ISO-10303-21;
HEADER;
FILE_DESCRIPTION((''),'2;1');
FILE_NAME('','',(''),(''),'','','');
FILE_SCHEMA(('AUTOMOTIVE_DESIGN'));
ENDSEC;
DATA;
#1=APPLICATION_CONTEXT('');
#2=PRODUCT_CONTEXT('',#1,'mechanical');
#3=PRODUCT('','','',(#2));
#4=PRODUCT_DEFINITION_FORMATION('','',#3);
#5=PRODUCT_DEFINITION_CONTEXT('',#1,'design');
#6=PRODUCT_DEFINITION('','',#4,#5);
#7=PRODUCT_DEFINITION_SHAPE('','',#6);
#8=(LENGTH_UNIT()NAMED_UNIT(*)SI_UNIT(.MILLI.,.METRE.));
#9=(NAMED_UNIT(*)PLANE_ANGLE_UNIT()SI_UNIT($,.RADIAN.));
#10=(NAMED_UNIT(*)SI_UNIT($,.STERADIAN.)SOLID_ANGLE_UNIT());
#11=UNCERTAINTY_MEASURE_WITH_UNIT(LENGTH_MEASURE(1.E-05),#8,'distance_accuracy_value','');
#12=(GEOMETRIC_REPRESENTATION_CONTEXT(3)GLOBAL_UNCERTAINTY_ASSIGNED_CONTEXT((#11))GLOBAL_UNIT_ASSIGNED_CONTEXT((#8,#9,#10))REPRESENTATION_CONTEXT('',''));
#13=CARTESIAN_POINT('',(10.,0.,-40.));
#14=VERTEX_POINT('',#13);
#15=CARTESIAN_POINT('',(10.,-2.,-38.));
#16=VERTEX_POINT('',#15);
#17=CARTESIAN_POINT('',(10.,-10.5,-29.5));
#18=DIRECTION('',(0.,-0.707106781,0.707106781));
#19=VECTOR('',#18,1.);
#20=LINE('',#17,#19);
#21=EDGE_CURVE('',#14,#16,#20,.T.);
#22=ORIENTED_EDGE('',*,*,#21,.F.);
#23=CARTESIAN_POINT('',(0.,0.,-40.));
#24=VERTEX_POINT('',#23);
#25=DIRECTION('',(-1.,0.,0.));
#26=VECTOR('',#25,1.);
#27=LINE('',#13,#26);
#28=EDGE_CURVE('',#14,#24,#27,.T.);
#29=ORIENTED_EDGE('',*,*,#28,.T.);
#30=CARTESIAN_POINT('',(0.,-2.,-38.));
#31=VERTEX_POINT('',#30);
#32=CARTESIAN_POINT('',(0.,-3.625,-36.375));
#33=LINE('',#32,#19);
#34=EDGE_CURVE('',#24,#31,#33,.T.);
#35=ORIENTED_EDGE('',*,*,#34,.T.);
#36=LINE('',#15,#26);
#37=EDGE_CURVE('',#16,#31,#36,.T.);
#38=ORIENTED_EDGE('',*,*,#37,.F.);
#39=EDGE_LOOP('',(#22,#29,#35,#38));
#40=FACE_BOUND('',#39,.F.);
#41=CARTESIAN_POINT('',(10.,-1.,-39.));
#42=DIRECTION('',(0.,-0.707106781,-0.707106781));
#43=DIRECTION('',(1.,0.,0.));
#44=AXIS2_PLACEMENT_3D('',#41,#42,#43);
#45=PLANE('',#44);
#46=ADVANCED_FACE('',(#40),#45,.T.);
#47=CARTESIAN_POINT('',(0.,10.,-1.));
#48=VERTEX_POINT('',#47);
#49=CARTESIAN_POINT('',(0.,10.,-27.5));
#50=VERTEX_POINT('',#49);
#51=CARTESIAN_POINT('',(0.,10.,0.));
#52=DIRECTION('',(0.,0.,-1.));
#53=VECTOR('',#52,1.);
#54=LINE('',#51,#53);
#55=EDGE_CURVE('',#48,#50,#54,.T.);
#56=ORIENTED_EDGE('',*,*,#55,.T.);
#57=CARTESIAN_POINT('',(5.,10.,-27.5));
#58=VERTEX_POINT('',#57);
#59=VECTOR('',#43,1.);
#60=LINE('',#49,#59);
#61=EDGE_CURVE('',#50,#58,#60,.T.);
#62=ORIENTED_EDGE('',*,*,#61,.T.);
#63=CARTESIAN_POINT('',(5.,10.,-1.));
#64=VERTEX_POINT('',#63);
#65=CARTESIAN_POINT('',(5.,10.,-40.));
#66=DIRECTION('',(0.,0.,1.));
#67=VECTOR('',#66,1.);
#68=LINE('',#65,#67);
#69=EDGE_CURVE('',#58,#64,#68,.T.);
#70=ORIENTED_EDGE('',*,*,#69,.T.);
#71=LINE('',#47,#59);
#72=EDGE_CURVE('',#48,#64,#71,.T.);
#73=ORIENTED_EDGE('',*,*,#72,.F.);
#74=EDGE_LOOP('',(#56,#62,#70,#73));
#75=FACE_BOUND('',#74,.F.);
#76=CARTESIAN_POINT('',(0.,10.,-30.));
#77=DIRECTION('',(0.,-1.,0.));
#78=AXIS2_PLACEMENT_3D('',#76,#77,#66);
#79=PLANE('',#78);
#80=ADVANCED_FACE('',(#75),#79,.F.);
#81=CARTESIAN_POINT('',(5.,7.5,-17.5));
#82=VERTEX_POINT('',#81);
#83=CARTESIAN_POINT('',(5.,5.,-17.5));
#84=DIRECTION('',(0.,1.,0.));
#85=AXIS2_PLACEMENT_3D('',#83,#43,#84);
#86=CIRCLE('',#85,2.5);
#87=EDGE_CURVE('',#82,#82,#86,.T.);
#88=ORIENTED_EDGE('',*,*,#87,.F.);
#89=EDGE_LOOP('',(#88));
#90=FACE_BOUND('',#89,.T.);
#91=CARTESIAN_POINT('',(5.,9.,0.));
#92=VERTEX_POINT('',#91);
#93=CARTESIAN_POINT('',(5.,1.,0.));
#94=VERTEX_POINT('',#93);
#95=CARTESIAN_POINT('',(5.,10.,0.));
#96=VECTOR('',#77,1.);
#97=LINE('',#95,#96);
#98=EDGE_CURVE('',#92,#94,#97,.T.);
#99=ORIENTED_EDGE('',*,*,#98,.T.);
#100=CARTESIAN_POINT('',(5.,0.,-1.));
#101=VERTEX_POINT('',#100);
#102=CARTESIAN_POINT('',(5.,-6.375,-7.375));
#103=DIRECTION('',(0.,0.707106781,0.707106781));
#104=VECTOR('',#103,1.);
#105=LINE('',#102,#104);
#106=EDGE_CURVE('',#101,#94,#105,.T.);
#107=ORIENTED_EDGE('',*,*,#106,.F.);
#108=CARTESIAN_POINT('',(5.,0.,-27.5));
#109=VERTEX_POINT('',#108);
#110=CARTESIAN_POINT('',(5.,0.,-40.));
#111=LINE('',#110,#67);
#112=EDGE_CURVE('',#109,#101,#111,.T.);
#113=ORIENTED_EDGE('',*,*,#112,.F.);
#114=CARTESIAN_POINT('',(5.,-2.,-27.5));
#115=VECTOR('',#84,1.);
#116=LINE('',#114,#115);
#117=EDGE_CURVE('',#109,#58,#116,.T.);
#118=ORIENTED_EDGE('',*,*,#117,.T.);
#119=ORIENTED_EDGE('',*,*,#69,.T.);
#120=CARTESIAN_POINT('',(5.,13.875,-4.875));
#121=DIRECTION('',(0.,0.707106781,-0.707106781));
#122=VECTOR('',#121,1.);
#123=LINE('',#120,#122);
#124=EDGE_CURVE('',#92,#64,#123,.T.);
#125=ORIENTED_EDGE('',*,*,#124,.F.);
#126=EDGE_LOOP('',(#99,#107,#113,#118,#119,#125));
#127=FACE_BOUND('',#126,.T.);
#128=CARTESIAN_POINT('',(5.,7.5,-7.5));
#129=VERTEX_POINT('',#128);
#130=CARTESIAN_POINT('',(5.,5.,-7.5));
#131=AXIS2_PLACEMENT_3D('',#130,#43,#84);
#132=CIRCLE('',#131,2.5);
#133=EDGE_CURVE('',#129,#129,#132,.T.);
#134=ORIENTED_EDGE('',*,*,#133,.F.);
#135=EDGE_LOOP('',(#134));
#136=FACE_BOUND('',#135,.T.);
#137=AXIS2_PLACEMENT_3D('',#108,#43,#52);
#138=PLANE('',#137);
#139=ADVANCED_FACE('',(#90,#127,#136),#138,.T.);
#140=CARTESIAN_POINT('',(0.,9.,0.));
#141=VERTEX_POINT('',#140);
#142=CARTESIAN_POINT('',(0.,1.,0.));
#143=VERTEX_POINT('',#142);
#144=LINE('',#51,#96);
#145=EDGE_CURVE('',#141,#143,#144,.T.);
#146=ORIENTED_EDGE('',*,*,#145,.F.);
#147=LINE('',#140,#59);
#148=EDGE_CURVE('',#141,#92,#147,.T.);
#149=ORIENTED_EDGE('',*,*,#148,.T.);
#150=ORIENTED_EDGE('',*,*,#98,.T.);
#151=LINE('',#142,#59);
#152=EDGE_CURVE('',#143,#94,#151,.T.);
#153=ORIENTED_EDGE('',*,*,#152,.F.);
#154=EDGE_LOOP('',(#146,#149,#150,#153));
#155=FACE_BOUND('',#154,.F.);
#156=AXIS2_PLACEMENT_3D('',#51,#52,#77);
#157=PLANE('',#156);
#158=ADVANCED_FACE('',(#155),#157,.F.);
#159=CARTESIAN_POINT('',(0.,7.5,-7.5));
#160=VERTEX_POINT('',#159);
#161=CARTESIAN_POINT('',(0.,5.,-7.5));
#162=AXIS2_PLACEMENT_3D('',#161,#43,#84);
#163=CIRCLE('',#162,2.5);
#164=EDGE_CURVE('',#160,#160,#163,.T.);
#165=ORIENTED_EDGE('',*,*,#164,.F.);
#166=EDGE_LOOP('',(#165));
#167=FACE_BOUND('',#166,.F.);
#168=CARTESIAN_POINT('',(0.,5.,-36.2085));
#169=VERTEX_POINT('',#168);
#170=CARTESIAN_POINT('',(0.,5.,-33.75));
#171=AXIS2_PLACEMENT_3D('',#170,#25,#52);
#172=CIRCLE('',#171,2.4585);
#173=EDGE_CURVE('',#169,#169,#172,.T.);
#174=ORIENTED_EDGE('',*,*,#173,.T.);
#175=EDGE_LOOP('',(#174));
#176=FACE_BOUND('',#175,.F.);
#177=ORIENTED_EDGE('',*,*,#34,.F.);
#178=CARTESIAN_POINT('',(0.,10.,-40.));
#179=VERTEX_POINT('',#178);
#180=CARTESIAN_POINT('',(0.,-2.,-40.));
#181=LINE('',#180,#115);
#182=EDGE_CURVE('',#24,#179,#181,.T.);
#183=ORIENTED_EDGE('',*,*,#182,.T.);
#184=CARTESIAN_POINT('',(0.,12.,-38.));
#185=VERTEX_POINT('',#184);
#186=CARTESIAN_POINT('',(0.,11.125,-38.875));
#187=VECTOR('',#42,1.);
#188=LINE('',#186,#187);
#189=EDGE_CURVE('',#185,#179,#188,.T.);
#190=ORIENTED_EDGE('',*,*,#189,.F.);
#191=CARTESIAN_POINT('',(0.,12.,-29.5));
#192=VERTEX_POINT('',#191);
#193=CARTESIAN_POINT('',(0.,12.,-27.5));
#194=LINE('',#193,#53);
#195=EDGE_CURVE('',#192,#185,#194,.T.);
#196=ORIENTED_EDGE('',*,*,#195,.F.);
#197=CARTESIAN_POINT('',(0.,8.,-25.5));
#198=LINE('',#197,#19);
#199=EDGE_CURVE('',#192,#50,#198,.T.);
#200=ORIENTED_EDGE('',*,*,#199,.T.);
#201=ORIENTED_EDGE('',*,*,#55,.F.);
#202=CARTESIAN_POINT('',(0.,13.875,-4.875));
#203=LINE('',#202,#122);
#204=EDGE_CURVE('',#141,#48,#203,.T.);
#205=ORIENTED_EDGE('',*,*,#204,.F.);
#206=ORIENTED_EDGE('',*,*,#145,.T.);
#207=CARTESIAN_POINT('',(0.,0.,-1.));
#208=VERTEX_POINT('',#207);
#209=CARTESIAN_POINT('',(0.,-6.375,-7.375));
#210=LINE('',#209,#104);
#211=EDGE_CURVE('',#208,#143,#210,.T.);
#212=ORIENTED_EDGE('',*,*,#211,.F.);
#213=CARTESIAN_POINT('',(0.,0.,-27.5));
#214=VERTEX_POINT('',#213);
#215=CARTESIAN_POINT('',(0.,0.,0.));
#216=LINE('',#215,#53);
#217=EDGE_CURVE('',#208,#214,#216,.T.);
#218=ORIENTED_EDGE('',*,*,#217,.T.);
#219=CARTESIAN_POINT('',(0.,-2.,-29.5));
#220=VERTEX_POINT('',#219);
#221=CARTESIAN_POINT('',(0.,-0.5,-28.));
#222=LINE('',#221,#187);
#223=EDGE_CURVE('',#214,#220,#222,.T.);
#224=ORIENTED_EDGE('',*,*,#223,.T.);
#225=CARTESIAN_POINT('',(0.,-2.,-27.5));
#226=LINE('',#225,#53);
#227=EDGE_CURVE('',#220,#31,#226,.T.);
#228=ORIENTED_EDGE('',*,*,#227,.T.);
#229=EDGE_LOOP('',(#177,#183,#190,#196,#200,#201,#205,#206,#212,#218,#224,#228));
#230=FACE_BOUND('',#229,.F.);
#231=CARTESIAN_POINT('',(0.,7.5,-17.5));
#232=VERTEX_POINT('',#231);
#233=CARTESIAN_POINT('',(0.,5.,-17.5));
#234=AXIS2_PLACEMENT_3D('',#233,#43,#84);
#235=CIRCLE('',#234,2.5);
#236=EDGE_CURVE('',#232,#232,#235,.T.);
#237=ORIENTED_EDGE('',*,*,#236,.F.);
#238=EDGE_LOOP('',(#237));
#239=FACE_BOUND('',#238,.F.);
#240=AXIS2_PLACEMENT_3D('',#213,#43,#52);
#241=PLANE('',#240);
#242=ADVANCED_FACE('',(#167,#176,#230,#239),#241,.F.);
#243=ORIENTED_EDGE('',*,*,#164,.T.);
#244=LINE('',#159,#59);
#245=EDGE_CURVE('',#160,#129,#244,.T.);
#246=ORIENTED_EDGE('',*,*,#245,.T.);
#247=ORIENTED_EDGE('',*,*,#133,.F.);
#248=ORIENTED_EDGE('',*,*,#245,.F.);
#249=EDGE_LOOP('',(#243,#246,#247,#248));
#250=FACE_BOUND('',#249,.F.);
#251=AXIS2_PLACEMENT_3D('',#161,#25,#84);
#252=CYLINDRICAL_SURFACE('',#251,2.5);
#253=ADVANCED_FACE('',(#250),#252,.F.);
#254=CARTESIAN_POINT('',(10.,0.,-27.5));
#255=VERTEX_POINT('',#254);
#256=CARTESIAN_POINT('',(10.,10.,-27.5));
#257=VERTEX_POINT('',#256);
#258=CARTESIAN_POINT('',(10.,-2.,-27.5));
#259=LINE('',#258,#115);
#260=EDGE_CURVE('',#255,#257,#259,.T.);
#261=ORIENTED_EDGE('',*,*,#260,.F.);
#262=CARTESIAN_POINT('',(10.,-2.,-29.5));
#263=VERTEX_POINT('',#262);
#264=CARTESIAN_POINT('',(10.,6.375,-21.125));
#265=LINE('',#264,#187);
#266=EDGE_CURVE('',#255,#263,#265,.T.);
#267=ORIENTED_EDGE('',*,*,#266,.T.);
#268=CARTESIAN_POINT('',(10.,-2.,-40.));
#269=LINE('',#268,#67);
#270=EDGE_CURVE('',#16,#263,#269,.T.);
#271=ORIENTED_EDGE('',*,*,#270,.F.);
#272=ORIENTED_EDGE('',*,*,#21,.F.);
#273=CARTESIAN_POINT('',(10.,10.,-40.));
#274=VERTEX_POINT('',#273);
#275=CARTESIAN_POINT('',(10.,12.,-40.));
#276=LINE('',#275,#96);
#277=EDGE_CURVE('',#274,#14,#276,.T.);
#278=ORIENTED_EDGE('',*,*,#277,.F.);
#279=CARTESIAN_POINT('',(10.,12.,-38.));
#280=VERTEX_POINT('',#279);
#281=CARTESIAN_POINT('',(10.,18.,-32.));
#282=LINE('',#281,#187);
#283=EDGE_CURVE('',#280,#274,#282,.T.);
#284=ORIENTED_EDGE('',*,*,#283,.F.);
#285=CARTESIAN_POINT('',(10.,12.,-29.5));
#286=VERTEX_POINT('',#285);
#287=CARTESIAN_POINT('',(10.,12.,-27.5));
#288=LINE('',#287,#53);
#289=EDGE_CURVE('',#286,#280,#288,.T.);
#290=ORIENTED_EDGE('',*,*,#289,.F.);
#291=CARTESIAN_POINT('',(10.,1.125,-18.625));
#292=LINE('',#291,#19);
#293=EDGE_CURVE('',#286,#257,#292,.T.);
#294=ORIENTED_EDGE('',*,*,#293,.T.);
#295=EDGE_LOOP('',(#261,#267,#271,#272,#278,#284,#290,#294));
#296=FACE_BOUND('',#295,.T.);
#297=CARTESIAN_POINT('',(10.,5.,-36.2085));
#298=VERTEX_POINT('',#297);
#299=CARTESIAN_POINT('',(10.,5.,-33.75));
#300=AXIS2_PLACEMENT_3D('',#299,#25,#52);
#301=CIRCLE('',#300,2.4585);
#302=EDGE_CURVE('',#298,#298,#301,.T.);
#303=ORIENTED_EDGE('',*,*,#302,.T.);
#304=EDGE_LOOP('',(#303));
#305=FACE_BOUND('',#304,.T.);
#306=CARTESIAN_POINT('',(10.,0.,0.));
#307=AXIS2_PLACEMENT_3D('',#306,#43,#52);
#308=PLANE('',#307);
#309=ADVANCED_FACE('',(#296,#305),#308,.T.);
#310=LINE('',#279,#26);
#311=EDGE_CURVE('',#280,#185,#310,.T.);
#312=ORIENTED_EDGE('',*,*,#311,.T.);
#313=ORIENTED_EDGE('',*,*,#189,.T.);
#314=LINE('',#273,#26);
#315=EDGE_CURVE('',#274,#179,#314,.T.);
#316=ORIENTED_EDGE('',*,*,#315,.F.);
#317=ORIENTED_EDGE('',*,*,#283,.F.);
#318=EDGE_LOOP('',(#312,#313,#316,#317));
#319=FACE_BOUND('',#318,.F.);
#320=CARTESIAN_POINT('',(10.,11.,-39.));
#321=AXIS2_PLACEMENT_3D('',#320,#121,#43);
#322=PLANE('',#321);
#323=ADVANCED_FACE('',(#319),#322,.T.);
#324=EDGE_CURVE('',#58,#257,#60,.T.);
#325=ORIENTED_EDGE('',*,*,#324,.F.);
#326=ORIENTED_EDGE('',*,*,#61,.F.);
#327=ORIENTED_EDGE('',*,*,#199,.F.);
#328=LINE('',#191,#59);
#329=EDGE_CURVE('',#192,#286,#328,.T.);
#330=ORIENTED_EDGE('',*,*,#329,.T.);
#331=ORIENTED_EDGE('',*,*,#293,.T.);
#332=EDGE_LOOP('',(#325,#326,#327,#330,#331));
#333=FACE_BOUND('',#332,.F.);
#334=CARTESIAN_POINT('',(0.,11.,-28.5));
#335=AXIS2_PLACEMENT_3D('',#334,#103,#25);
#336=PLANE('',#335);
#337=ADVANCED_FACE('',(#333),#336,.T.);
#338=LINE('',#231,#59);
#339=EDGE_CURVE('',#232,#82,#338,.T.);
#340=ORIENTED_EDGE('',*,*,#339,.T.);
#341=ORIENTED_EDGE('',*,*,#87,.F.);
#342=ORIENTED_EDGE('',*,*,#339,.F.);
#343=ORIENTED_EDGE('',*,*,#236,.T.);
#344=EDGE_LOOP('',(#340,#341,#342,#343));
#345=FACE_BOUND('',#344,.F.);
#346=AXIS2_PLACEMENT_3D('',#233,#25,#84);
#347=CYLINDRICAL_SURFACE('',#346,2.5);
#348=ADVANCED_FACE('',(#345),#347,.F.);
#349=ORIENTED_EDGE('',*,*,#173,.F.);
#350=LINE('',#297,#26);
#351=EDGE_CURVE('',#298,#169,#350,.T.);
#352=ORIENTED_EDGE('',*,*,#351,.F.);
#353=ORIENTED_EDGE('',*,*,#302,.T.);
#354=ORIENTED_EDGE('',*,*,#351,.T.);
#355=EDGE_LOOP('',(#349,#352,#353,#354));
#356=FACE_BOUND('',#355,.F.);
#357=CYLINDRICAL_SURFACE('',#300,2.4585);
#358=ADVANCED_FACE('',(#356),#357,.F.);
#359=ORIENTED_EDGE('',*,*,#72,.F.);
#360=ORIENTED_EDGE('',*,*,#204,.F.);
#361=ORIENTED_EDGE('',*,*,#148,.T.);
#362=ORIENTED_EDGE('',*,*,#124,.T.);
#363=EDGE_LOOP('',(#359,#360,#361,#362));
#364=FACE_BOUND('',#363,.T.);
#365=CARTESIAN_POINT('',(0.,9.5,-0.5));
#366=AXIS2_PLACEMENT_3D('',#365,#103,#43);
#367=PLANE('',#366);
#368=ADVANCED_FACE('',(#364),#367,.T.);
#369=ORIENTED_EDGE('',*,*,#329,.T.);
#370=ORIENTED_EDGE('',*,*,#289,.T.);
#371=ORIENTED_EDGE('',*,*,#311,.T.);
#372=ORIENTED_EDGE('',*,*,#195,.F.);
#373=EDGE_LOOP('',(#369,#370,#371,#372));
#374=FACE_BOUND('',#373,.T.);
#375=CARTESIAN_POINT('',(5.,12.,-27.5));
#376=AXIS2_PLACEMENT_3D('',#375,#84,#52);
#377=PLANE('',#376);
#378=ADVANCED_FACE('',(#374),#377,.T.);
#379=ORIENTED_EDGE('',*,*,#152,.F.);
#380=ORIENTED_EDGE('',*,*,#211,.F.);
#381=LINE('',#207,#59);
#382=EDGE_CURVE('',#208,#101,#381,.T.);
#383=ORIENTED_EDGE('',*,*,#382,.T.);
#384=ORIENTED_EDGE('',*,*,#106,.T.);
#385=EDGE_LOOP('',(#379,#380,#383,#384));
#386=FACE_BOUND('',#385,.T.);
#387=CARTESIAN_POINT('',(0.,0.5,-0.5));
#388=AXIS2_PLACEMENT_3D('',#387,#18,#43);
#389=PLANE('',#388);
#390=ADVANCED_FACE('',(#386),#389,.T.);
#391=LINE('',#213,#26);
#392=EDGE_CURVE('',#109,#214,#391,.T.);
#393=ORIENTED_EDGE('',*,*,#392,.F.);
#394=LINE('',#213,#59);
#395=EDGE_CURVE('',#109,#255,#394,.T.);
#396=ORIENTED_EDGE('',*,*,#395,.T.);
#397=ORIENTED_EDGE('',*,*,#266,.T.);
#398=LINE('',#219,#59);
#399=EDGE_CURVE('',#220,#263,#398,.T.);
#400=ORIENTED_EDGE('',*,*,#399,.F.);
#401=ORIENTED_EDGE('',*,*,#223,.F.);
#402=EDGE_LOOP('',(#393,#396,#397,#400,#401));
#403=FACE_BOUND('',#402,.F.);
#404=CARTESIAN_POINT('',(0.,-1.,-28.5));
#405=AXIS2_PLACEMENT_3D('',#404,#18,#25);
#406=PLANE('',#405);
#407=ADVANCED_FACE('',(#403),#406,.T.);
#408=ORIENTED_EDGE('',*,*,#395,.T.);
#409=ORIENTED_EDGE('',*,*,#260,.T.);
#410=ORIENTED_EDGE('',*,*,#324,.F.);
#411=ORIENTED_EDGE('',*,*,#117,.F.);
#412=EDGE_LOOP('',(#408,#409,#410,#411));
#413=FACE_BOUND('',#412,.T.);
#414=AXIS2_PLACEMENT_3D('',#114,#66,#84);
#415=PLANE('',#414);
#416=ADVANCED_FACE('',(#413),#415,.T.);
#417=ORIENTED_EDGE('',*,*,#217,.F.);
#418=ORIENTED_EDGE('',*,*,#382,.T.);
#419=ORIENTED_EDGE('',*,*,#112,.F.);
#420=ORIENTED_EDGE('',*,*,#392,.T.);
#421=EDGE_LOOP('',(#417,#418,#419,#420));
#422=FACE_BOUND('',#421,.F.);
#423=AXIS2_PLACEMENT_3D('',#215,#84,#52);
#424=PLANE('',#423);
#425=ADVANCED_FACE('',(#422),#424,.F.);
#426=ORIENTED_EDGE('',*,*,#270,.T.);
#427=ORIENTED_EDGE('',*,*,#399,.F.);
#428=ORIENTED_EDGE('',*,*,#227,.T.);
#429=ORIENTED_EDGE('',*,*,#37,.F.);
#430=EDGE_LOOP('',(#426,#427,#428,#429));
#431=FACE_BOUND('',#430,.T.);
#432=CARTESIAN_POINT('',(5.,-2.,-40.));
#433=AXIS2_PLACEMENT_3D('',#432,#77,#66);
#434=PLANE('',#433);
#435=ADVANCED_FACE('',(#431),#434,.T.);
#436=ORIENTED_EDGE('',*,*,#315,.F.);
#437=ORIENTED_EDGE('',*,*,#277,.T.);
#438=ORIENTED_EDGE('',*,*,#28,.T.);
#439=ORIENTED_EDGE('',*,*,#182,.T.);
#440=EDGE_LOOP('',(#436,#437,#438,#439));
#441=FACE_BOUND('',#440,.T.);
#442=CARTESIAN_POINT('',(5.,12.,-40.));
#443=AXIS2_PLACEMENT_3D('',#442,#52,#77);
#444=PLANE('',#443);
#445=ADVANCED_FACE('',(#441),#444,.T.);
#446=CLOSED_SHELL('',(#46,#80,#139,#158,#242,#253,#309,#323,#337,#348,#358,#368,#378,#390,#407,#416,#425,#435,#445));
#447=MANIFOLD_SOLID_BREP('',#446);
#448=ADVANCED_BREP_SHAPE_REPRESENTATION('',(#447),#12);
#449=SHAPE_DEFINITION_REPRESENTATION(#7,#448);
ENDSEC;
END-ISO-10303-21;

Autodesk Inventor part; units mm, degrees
ref_plane "YZ Plane" through (0, 0, 0) normal (1, 0, 0) x (0, 1, 0)
ref_plane "XZ Plane" through (0, 0, 0) normal (0, 1, 0) x (-1, 0, 0)
ref_plane "XY Plane" through (0, 0, 0) normal (0, 0, 1) x (1, 0, 0)
sketch "Sketch1" plane through (0, 0, 0) normal (1, 0, 0) x (0, 1, 0)
  circle A0 centre (5, -7.5) radius 2.5
  circle A1 centre (5, -17.5) radius 2.5
  line L0 (0, -30) -> (10, -30)
  line L1 (10, -30) -> (10, 0)
  line L2 (10, 0) -> (0, 0)
  line L3 (0, 0) -> (0, -30)
  dimension "d23" = 30
  dimension "d25" = 30
  dimension "d38" = 10
  dimension "d39" = 5
  dimension "d40" = 5
  dimension "d41" = 10
  dimension "d42" = 5
  dimension "d43" = 5
extrude "Extrusion1" add sketch "Sketch1" along normal blind 5
sketch "Sketch2" plane through (0, 0, -30) normal (0, 0, -1) x (-1, 0, 0)
  line L0 (0, 0) -> (0, 10) projected
  line L1 (0, 10) -> (-5, 10) projected
  line L2 (-5, 0) -> (-5, 10) projected
  line L3 (0, 0) -> (-5, 0) projected
extrude "Extrusion2" add sketch "Sketch2" along normal blind 10
sketch "Sketch4" plane through (0, 10, 0) normal (0, 1, 0) x (1, 0, 0)
  line L0 (5, 0) -> (5, 40) projected
  line L1 (0, 40) -> (5, 40) projected
  line L2 (0, 40) -> (5, 40)
  line L3 (5, 40) -> (5, 27.5)
  line L4 (5, 27.5) -> (0, 27.5)
  line L5 (0, 27.5) -> (0, 40)
  dimension "d5" = 12.5
extrude "Extrusion3" add sketch "Sketch4" along normal blind 2
sketch "Sketch5" plane through (0, 0, 0) normal (0, -1, 0) x (1, 0, 0)
  line L0 (5, 0) -> (5, -40) projected
  line L1 (0, -40) -> (5, -40)
  line L2 (5, -40) -> (5, -27.5)
  line L3 (5, -27.5) -> (0, -27.5)
  line L4 (0, -27.5) -> (0, -40)
  dimension "d8" = 12.5
extrude "Extrusion4" add sketch "Sketch5" along normal blind 2
sketch "Sketch6" plane through (5, 0, 0) normal (1, 0, 0) x (0, 0, -1)
  line L0 (27.5, 12) -> (40, 12)
  line L1 (40, 12) -> (40, -2)
  line L2 (40, -2) -> (27.5, -2)
  line L3 (27.5, -2) -> (27.5, 12)
  line L4 (40, -2) -> (40, 12) projected
  line L5 (27.5, 12) -> (40, 12) projected
chamfer "Chamfer3" distance 1 angle 45 2 edges at (2.5, 10, 0) (2.5, 0, 0)
extrude "Extrusion6" add sketch "Sketch6" along normal blind 5
chamfer "Chamfer4" distance 2 angle 45 4 edges at (5, 12, -27.5) (5, 12, -40) (5, -2, -40) (5, -2, -27.5)
sketch "Sketch7" plane through (10, 0, 0) normal (1, 0, 0) x (0, 0, -1)
  line L0 (40, 0) -> (40, 10) projected
  line L1 (38, 12) -> (29.5, 12) projected
  point P0 (0, 0)
  point P1 (33.75, 5)
  dimension "d44" = 7
  dimension "d45" = 6.25
hole "Hole1" at (10, 5, -33.75) direction (-1, 0, 0) diameter 4.917 end through all thread size "M6x1" class "6H" standard "ISO Metric profile"
properties part number "holder"
